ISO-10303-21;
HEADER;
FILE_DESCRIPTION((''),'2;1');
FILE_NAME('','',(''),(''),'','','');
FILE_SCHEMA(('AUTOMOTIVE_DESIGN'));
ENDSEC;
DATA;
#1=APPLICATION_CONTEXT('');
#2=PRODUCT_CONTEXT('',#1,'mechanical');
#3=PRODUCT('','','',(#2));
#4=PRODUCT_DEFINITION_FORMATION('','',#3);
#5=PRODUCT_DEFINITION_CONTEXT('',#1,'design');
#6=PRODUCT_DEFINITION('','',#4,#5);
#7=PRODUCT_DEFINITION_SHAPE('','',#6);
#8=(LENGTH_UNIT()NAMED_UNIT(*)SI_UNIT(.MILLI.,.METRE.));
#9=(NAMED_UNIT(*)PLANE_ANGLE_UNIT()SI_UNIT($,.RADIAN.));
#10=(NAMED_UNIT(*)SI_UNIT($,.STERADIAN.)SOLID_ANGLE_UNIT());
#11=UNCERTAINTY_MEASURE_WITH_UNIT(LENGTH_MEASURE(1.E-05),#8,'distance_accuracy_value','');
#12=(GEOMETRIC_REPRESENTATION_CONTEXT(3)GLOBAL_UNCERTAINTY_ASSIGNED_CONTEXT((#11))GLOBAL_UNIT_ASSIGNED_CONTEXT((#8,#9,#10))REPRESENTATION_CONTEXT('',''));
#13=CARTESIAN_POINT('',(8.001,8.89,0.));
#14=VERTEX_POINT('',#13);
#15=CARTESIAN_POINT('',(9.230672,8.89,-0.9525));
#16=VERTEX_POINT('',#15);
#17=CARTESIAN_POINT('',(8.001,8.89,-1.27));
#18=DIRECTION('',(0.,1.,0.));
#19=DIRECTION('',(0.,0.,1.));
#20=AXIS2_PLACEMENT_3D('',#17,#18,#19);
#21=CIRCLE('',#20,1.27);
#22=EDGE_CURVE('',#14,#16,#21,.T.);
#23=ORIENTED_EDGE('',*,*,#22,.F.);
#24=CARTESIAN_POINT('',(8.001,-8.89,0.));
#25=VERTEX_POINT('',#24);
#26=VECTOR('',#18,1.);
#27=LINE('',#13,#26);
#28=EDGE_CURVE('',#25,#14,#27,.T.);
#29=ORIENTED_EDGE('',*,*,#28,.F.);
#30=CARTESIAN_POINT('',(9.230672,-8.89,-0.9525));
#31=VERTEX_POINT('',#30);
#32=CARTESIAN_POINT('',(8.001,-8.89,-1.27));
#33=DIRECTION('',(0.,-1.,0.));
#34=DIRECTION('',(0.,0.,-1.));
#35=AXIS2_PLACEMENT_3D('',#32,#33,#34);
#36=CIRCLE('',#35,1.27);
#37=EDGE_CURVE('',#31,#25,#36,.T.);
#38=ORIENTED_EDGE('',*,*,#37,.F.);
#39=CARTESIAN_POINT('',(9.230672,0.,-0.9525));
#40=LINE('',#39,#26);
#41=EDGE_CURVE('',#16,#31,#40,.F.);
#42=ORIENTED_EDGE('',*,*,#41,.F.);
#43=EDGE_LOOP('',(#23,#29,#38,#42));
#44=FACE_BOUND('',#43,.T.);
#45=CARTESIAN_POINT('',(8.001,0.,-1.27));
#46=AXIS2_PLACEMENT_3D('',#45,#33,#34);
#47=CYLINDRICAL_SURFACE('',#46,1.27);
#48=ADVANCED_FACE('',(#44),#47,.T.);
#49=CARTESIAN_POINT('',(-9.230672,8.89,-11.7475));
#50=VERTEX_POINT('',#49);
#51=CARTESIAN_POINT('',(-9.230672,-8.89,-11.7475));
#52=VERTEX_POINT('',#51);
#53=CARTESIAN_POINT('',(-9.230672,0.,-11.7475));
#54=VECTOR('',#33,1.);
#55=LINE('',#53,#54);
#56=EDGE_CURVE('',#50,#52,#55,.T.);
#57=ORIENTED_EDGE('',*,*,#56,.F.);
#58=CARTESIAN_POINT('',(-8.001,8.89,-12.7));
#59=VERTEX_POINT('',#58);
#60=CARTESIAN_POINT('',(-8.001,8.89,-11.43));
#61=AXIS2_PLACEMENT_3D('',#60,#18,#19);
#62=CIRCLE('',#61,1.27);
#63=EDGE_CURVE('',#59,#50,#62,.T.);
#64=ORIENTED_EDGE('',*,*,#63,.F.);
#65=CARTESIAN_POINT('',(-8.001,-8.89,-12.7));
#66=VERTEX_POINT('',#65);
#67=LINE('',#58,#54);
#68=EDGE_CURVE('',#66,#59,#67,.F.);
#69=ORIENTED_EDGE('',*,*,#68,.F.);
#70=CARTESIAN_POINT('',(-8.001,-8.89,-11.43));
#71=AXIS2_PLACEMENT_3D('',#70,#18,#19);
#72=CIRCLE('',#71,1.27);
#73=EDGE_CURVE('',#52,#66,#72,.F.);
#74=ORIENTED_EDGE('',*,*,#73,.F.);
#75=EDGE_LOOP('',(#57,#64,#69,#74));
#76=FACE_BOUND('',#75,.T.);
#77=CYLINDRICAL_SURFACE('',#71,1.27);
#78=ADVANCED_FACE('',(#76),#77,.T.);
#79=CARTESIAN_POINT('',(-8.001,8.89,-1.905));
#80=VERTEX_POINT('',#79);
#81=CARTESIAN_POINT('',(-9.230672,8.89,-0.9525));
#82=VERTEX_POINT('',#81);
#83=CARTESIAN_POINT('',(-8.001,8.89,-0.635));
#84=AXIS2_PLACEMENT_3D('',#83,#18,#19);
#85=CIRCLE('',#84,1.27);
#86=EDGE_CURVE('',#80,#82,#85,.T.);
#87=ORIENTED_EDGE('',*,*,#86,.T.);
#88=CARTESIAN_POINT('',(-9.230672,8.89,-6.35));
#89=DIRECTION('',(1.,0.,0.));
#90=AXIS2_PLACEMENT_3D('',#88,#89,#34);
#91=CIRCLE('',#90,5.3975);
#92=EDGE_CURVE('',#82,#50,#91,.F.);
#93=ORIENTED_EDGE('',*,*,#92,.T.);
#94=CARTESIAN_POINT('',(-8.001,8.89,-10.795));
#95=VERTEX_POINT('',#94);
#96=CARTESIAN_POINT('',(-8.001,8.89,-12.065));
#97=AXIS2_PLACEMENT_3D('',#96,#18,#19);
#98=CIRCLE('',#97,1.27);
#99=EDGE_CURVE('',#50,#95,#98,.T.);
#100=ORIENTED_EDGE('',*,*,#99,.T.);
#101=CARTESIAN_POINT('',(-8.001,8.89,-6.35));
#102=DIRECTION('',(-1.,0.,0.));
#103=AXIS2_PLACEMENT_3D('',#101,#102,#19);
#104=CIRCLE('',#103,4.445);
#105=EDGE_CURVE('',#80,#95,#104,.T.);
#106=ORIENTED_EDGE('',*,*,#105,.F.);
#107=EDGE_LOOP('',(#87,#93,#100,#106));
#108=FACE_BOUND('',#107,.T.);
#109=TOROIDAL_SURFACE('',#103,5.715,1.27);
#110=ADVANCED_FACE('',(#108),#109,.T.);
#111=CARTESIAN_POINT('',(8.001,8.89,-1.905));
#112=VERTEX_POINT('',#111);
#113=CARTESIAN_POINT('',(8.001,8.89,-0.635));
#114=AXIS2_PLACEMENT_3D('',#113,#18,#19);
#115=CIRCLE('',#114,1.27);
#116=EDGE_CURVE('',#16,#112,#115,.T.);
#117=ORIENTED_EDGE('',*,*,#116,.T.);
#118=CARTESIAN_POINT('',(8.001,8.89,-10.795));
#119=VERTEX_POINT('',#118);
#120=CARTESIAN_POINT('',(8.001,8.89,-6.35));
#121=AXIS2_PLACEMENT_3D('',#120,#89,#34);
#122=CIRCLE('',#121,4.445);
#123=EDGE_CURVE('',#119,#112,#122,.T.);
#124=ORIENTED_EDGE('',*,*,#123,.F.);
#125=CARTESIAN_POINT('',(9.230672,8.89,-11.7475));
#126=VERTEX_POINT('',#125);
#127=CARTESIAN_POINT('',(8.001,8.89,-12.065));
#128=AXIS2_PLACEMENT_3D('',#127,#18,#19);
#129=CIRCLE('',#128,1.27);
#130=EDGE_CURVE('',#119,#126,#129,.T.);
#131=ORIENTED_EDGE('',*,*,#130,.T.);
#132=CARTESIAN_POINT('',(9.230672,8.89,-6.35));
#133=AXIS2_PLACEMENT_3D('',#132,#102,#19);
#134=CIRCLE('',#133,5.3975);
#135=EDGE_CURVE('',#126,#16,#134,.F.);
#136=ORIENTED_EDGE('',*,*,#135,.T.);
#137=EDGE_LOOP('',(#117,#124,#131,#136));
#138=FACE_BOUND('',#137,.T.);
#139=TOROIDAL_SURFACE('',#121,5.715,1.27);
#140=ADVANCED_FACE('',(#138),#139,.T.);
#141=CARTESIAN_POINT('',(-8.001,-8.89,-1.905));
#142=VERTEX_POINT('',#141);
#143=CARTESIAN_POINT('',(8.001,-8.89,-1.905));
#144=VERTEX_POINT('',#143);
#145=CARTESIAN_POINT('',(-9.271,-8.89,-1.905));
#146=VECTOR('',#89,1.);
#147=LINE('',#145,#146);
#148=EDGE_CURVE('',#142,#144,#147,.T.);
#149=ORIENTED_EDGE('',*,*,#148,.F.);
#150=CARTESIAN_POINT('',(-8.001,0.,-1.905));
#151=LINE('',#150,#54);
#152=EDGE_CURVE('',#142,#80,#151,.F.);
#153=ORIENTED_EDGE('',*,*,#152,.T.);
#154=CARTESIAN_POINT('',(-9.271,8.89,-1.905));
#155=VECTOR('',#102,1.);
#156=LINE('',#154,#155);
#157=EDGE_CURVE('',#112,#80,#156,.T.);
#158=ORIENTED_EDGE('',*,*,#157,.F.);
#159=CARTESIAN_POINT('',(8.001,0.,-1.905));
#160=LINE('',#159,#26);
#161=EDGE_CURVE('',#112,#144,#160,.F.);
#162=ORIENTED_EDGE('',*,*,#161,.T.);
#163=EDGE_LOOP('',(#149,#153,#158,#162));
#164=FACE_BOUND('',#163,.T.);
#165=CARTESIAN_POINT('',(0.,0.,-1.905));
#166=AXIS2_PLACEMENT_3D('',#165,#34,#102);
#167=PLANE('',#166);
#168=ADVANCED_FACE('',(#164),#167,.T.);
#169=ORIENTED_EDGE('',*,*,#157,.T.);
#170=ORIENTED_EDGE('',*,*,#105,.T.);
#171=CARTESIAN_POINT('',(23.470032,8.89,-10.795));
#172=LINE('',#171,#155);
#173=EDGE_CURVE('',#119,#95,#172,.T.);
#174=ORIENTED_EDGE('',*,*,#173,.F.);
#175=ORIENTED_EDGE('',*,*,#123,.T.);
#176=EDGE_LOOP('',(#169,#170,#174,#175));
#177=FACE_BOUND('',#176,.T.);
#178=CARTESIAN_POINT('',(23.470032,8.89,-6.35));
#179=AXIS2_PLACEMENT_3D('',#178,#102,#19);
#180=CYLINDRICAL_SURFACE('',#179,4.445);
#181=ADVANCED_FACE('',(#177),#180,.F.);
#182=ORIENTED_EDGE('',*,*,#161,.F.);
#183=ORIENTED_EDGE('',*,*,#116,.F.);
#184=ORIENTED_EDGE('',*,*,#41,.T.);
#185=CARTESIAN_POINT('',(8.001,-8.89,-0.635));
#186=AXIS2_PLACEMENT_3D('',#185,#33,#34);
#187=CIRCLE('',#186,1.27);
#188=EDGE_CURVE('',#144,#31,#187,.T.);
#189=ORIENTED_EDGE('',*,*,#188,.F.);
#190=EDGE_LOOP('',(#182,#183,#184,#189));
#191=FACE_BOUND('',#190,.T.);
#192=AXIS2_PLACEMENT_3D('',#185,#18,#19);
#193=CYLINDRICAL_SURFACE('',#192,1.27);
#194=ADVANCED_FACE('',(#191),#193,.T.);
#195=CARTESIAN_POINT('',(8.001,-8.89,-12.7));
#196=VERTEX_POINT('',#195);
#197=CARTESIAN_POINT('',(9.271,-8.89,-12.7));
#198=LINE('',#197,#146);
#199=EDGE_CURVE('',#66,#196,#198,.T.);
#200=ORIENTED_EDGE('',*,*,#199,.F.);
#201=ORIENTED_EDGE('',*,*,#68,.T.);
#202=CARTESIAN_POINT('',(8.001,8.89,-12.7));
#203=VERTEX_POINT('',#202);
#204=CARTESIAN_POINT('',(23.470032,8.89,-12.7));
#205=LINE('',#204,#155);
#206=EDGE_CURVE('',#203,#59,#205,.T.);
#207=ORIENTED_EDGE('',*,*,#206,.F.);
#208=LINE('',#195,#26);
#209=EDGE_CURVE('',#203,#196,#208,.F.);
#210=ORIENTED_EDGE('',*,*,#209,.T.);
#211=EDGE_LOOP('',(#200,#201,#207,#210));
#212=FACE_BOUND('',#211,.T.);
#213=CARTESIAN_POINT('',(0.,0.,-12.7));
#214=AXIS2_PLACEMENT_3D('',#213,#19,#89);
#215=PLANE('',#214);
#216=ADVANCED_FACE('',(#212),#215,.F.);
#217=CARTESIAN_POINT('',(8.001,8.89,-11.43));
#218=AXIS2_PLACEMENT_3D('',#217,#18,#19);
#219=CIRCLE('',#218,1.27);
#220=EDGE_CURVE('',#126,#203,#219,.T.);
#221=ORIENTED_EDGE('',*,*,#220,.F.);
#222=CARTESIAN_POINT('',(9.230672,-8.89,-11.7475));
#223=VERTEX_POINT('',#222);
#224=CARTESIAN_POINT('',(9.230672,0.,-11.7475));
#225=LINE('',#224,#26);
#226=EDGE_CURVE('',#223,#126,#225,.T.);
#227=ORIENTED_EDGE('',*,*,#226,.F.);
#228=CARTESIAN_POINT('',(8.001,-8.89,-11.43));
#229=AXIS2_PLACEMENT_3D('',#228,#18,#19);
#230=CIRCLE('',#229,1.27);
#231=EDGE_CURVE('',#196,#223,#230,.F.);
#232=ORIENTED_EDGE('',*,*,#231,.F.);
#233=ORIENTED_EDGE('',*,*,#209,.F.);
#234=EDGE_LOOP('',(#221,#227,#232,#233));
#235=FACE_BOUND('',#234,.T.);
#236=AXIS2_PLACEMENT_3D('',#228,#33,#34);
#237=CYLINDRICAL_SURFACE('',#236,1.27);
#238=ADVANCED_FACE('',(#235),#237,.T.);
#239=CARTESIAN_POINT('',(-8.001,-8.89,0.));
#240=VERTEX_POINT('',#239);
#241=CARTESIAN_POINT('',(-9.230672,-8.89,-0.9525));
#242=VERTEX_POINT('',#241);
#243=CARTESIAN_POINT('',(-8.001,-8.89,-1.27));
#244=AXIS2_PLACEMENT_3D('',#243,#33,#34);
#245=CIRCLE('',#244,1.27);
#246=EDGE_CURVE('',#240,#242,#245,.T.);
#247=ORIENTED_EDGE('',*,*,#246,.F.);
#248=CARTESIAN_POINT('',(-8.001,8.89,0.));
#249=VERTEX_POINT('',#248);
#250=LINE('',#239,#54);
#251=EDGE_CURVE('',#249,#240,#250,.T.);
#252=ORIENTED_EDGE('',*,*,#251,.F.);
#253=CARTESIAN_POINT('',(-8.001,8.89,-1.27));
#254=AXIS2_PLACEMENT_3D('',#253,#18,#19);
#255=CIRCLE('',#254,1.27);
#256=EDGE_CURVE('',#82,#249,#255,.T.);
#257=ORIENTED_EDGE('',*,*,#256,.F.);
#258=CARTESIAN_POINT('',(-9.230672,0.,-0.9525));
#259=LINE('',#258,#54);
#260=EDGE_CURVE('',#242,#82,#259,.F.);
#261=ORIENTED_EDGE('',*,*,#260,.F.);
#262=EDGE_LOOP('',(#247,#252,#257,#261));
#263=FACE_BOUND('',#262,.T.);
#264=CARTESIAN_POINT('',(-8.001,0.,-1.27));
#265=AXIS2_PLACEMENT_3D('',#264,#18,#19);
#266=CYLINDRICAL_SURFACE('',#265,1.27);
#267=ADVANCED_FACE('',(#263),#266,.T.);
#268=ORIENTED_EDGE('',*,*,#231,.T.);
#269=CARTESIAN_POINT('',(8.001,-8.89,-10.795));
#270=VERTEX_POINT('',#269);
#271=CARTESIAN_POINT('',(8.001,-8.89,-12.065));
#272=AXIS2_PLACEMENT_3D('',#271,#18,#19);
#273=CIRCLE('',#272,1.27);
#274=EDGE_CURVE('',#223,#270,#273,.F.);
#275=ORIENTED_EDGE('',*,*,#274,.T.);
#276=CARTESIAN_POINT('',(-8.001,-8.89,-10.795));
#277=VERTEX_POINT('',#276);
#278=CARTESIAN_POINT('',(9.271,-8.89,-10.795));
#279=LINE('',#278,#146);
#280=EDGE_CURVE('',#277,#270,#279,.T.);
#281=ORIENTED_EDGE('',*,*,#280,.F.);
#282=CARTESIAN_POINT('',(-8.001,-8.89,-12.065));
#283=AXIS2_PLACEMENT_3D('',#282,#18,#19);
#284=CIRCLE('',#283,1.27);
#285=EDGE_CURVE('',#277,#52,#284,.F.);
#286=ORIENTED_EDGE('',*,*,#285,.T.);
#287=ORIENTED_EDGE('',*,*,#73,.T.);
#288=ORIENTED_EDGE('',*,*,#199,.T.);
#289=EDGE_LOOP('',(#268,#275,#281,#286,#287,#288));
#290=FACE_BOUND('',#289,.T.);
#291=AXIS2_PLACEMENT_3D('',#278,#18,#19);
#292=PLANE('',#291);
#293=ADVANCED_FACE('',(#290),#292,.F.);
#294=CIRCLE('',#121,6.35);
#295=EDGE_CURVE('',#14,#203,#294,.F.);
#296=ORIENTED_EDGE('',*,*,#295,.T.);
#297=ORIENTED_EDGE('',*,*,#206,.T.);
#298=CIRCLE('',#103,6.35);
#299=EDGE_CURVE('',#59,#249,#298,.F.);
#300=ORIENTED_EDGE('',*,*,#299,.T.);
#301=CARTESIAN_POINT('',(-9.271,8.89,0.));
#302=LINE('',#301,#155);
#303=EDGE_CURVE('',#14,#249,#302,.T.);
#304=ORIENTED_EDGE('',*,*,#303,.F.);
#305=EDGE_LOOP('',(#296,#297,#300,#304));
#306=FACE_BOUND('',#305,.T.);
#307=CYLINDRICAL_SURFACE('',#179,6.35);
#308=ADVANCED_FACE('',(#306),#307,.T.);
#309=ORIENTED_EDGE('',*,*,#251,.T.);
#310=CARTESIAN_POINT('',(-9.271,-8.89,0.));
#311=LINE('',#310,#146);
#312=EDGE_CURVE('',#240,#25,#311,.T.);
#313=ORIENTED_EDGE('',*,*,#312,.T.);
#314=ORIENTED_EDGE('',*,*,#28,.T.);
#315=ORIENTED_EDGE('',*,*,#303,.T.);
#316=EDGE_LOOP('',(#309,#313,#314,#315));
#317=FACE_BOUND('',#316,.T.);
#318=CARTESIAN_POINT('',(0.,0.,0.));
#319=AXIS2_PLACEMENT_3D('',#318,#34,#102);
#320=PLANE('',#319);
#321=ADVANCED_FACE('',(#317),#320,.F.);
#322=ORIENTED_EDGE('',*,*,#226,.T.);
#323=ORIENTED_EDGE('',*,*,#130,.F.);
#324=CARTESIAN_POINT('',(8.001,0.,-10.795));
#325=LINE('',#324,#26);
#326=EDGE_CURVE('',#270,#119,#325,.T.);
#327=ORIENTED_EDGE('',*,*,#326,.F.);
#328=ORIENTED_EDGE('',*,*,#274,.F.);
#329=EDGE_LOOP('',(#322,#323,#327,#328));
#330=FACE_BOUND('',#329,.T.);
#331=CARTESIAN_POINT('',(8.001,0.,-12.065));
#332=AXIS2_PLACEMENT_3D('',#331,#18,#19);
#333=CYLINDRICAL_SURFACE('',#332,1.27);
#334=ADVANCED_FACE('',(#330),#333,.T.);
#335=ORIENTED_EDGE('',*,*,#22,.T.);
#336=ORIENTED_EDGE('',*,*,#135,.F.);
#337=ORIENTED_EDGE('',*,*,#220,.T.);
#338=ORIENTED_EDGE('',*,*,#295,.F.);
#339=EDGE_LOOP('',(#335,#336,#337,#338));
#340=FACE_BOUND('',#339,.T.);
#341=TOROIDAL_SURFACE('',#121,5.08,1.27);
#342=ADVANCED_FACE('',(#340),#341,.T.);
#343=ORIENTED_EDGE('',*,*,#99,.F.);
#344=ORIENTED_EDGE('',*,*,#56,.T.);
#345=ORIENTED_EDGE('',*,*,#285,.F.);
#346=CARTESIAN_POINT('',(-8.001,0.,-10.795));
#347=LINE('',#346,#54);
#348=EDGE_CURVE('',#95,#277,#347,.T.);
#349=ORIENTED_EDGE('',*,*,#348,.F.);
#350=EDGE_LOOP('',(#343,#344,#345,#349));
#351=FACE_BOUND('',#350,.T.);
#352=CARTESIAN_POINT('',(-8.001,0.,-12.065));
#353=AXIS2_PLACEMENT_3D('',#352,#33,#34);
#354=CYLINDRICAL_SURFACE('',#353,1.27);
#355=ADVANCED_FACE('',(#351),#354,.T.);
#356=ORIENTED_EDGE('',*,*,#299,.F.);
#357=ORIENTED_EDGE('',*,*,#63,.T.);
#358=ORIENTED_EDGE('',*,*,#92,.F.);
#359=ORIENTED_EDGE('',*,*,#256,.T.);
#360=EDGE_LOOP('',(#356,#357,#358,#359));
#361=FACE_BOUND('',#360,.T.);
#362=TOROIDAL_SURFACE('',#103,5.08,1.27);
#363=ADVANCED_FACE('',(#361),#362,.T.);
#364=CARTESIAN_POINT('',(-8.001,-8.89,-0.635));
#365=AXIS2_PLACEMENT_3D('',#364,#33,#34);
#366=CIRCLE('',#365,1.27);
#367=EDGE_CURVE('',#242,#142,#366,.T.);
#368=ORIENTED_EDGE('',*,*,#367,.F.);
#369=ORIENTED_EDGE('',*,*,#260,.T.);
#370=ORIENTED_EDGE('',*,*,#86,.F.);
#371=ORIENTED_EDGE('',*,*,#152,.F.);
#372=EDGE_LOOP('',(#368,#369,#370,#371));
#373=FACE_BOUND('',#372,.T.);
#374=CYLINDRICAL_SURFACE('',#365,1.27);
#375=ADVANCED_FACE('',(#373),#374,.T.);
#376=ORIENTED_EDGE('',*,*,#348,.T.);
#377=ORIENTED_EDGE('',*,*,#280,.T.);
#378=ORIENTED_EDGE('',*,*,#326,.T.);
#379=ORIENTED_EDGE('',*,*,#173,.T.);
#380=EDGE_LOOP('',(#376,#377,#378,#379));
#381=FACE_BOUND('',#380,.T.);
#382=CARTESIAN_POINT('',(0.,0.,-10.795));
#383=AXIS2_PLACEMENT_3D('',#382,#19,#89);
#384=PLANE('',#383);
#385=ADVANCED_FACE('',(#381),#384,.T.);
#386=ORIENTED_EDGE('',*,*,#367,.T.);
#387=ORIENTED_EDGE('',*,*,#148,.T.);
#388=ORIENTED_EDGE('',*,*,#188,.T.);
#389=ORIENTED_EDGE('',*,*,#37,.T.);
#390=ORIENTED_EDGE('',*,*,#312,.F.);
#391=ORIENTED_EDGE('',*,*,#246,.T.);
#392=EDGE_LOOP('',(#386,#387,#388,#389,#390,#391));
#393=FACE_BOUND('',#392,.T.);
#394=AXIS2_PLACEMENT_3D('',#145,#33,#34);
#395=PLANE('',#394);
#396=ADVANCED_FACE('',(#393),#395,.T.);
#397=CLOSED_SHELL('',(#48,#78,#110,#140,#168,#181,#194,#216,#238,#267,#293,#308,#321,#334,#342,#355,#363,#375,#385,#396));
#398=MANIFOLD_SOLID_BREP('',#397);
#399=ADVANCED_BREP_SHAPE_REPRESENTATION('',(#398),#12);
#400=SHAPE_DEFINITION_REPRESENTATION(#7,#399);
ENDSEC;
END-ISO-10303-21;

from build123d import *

# Parameters (mm, degrees)
SKETCH1_W           = 18.542
SKETCH1_H           = 17.78
BOSS_EXTRUDE4_DEPTH = 1.905
SKETCH4_W           = 18.542
SKETCH4_H           = 17.78
BOSS_EXTRUDE5_DEPTH = 1.905
BOSS_EXTRUDE6_DEPTH = 18.542
FILLET1_R           = 1.27


with BuildPart() as part:
    # Sketch1 → Boss-Extrude4 (new body)
    with BuildSketch(Plane.XY):
        Rectangle(SKETCH1_W, SKETCH1_H)
    extrude(amount=-BOSS_EXTRUDE4_DEPTH)



with BuildPart() as body_2:
    # Sketch4 → Boss-Extrude5 (new body)
    with BuildSketch(Plane.XY.offset(-12.7)):
        Rectangle(SKETCH4_W, SKETCH4_H)
    extrude(amount=BOSS_EXTRUDE5_DEPTH)


with BuildPart() as part_1:
    add(part.part)

    add(body_2.part)  # Boss-Extrude6 merges body 2
    # Sketch6 → Boss-Extrude6 (add)
    with BuildSketch(Plane.ZY.offset(9.271)):
        with BuildLine():
            Line((-12.7, 8.89), (-10.795, 8.89))
            ThreePointArc((-10.795, 8.89), (-6.35, 13.335), (-1.905, 8.89))
            Line((-1.905, 8.89), (0, 8.89))
            ThreePointArc((0, 8.89), (-6.35, 15.24), (-12.7, 8.89))
        make_face()
    extrude(amount=-BOSS_EXTRUDE6_DEPTH)

    # Fillet1
    # the kernel refuses this fillet: 1.27 mm, written as the material it takes off along each edge
    with BuildSketch(Plane(origin=(9.271, 8.89, -6.35), x_dir=(0, 0, -1), z_dir=(0, -1, 0))) as fillet1_piece_1:
        with BuildLine():
            CenterArc((4.445 + FILLET1_R, -FILLET1_R), FILLET1_R, 90, 90)
            Line((4.445, -FILLET1_R), (4.445, 0))
            Line((4.445, 0), (4.445 + FILLET1_R, 0))
        make_face()
    revolve(axis=Axis((9.271, 8.89, -6.35), (1, 0, 0)), revolution_arc=180, mode=Mode.SUBTRACT)
    with BuildSketch(Plane(origin=(-9.271, 8.89, -6.35), x_dir=(0, 0, -1), z_dir=(0, -1, 0))) as fillet1_piece_2:
        with BuildLine():
            CenterArc((4.445 + FILLET1_R, FILLET1_R), FILLET1_R, 180, 90)
            Line((4.445, FILLET1_R), (4.445, 0))
            Line((4.445, 0), (4.445 + FILLET1_R, 0))
        make_face()
    revolve(axis=Axis((-9.271, 8.89, -6.35), (1, 0, 0)), revolution_arc=180, mode=Mode.SUBTRACT)
    with BuildSketch(Plane(origin=(9.271, 8.89, -6.35), x_dir=(0, 0, 1), z_dir=(0, -1, 0))) as fillet1_piece_3:
        with BuildLine():
            CenterArc((6.35 - FILLET1_R, FILLET1_R), FILLET1_R, 270, 90)
            Line((6.35, FILLET1_R), (6.35, 0))
            Line((6.35, 0), (6.35 - FILLET1_R, 0))
        make_face()
    revolve(axis=Axis((9.271, 8.89, -6.35), (-1, 0, 0)), revolution_arc=180, mode=Mode.SUBTRACT)
    with BuildSketch(Plane(origin=(-9.271, 8.89, -6.35), x_dir=(0, 0, 1), z_dir=(0, -1, 0))) as fillet1_piece_4:
        with BuildLine():
            CenterArc((6.35 - FILLET1_R, -FILLET1_R), FILLET1_R, 0, 90)
            Line((6.35, -FILLET1_R), (6.35, 0))
            Line((6.35, 0), (6.35 - FILLET1_R, 0))
        make_face()
    revolve(axis=Axis((-9.271, 8.89, -6.35), (-1, 0, 0)), revolution_arc=180, mode=Mode.SUBTRACT)
    with BuildSketch(Plane(origin=(-9.271, -12.065, -12.7), x_dir=(0, 0, 1), z_dir=(0, 1, 0)), Plane(origin=(-9.271, 8.89, 0), x_dir=(0, 0, -1), z_dir=(0, -1, 0)), Plane(origin=(9.271, -12.065, 0), x_dir=(0, 0, -1), z_dir=(0, 1, 0)), Plane(origin=(9.271, 8.89, -12.7), x_dir=(0, 0, 1), z_dir=(0, -1, 0))) as fillet1_piece_5:
        with BuildLine():
            CenterArc((FILLET1_R, FILLET1_R), FILLET1_R, 180, 90)
            Line((0, FILLET1_R), (0, 0))
            Line((0, 0), (FILLET1_R, 0))
        make_face()
    extrude(amount=20.955, mode=Mode.SUBTRACT)
    with BuildSketch(Plane(origin=(-9.271, -12.065, -10.795), x_dir=(0, 0, -1), z_dir=(0, 1, 0)), Plane(origin=(-9.271, 8.89, -1.905), x_dir=(0, 0, 1), z_dir=(0, -1, 0)), Plane(origin=(9.271, -12.065, -1.905), x_dir=(0, 0, 1), z_dir=(0, 1, 0)), Plane(origin=(9.271, 8.89, -10.795), x_dir=(0, 0, -1), z_dir=(0, -1, 0))) as fillet1_piece_6:
        with BuildLine():
            CenterArc((FILLET1_R, -FILLET1_R), FILLET1_R, 90, 90)
            Line((0, -FILLET1_R), (0, 0))
            Line((0, 0), (FILLET1_R, 0))
        make_face()
    extrude(amount=20.955, mode=Mode.SUBTRACT)


solid = part_1.part
